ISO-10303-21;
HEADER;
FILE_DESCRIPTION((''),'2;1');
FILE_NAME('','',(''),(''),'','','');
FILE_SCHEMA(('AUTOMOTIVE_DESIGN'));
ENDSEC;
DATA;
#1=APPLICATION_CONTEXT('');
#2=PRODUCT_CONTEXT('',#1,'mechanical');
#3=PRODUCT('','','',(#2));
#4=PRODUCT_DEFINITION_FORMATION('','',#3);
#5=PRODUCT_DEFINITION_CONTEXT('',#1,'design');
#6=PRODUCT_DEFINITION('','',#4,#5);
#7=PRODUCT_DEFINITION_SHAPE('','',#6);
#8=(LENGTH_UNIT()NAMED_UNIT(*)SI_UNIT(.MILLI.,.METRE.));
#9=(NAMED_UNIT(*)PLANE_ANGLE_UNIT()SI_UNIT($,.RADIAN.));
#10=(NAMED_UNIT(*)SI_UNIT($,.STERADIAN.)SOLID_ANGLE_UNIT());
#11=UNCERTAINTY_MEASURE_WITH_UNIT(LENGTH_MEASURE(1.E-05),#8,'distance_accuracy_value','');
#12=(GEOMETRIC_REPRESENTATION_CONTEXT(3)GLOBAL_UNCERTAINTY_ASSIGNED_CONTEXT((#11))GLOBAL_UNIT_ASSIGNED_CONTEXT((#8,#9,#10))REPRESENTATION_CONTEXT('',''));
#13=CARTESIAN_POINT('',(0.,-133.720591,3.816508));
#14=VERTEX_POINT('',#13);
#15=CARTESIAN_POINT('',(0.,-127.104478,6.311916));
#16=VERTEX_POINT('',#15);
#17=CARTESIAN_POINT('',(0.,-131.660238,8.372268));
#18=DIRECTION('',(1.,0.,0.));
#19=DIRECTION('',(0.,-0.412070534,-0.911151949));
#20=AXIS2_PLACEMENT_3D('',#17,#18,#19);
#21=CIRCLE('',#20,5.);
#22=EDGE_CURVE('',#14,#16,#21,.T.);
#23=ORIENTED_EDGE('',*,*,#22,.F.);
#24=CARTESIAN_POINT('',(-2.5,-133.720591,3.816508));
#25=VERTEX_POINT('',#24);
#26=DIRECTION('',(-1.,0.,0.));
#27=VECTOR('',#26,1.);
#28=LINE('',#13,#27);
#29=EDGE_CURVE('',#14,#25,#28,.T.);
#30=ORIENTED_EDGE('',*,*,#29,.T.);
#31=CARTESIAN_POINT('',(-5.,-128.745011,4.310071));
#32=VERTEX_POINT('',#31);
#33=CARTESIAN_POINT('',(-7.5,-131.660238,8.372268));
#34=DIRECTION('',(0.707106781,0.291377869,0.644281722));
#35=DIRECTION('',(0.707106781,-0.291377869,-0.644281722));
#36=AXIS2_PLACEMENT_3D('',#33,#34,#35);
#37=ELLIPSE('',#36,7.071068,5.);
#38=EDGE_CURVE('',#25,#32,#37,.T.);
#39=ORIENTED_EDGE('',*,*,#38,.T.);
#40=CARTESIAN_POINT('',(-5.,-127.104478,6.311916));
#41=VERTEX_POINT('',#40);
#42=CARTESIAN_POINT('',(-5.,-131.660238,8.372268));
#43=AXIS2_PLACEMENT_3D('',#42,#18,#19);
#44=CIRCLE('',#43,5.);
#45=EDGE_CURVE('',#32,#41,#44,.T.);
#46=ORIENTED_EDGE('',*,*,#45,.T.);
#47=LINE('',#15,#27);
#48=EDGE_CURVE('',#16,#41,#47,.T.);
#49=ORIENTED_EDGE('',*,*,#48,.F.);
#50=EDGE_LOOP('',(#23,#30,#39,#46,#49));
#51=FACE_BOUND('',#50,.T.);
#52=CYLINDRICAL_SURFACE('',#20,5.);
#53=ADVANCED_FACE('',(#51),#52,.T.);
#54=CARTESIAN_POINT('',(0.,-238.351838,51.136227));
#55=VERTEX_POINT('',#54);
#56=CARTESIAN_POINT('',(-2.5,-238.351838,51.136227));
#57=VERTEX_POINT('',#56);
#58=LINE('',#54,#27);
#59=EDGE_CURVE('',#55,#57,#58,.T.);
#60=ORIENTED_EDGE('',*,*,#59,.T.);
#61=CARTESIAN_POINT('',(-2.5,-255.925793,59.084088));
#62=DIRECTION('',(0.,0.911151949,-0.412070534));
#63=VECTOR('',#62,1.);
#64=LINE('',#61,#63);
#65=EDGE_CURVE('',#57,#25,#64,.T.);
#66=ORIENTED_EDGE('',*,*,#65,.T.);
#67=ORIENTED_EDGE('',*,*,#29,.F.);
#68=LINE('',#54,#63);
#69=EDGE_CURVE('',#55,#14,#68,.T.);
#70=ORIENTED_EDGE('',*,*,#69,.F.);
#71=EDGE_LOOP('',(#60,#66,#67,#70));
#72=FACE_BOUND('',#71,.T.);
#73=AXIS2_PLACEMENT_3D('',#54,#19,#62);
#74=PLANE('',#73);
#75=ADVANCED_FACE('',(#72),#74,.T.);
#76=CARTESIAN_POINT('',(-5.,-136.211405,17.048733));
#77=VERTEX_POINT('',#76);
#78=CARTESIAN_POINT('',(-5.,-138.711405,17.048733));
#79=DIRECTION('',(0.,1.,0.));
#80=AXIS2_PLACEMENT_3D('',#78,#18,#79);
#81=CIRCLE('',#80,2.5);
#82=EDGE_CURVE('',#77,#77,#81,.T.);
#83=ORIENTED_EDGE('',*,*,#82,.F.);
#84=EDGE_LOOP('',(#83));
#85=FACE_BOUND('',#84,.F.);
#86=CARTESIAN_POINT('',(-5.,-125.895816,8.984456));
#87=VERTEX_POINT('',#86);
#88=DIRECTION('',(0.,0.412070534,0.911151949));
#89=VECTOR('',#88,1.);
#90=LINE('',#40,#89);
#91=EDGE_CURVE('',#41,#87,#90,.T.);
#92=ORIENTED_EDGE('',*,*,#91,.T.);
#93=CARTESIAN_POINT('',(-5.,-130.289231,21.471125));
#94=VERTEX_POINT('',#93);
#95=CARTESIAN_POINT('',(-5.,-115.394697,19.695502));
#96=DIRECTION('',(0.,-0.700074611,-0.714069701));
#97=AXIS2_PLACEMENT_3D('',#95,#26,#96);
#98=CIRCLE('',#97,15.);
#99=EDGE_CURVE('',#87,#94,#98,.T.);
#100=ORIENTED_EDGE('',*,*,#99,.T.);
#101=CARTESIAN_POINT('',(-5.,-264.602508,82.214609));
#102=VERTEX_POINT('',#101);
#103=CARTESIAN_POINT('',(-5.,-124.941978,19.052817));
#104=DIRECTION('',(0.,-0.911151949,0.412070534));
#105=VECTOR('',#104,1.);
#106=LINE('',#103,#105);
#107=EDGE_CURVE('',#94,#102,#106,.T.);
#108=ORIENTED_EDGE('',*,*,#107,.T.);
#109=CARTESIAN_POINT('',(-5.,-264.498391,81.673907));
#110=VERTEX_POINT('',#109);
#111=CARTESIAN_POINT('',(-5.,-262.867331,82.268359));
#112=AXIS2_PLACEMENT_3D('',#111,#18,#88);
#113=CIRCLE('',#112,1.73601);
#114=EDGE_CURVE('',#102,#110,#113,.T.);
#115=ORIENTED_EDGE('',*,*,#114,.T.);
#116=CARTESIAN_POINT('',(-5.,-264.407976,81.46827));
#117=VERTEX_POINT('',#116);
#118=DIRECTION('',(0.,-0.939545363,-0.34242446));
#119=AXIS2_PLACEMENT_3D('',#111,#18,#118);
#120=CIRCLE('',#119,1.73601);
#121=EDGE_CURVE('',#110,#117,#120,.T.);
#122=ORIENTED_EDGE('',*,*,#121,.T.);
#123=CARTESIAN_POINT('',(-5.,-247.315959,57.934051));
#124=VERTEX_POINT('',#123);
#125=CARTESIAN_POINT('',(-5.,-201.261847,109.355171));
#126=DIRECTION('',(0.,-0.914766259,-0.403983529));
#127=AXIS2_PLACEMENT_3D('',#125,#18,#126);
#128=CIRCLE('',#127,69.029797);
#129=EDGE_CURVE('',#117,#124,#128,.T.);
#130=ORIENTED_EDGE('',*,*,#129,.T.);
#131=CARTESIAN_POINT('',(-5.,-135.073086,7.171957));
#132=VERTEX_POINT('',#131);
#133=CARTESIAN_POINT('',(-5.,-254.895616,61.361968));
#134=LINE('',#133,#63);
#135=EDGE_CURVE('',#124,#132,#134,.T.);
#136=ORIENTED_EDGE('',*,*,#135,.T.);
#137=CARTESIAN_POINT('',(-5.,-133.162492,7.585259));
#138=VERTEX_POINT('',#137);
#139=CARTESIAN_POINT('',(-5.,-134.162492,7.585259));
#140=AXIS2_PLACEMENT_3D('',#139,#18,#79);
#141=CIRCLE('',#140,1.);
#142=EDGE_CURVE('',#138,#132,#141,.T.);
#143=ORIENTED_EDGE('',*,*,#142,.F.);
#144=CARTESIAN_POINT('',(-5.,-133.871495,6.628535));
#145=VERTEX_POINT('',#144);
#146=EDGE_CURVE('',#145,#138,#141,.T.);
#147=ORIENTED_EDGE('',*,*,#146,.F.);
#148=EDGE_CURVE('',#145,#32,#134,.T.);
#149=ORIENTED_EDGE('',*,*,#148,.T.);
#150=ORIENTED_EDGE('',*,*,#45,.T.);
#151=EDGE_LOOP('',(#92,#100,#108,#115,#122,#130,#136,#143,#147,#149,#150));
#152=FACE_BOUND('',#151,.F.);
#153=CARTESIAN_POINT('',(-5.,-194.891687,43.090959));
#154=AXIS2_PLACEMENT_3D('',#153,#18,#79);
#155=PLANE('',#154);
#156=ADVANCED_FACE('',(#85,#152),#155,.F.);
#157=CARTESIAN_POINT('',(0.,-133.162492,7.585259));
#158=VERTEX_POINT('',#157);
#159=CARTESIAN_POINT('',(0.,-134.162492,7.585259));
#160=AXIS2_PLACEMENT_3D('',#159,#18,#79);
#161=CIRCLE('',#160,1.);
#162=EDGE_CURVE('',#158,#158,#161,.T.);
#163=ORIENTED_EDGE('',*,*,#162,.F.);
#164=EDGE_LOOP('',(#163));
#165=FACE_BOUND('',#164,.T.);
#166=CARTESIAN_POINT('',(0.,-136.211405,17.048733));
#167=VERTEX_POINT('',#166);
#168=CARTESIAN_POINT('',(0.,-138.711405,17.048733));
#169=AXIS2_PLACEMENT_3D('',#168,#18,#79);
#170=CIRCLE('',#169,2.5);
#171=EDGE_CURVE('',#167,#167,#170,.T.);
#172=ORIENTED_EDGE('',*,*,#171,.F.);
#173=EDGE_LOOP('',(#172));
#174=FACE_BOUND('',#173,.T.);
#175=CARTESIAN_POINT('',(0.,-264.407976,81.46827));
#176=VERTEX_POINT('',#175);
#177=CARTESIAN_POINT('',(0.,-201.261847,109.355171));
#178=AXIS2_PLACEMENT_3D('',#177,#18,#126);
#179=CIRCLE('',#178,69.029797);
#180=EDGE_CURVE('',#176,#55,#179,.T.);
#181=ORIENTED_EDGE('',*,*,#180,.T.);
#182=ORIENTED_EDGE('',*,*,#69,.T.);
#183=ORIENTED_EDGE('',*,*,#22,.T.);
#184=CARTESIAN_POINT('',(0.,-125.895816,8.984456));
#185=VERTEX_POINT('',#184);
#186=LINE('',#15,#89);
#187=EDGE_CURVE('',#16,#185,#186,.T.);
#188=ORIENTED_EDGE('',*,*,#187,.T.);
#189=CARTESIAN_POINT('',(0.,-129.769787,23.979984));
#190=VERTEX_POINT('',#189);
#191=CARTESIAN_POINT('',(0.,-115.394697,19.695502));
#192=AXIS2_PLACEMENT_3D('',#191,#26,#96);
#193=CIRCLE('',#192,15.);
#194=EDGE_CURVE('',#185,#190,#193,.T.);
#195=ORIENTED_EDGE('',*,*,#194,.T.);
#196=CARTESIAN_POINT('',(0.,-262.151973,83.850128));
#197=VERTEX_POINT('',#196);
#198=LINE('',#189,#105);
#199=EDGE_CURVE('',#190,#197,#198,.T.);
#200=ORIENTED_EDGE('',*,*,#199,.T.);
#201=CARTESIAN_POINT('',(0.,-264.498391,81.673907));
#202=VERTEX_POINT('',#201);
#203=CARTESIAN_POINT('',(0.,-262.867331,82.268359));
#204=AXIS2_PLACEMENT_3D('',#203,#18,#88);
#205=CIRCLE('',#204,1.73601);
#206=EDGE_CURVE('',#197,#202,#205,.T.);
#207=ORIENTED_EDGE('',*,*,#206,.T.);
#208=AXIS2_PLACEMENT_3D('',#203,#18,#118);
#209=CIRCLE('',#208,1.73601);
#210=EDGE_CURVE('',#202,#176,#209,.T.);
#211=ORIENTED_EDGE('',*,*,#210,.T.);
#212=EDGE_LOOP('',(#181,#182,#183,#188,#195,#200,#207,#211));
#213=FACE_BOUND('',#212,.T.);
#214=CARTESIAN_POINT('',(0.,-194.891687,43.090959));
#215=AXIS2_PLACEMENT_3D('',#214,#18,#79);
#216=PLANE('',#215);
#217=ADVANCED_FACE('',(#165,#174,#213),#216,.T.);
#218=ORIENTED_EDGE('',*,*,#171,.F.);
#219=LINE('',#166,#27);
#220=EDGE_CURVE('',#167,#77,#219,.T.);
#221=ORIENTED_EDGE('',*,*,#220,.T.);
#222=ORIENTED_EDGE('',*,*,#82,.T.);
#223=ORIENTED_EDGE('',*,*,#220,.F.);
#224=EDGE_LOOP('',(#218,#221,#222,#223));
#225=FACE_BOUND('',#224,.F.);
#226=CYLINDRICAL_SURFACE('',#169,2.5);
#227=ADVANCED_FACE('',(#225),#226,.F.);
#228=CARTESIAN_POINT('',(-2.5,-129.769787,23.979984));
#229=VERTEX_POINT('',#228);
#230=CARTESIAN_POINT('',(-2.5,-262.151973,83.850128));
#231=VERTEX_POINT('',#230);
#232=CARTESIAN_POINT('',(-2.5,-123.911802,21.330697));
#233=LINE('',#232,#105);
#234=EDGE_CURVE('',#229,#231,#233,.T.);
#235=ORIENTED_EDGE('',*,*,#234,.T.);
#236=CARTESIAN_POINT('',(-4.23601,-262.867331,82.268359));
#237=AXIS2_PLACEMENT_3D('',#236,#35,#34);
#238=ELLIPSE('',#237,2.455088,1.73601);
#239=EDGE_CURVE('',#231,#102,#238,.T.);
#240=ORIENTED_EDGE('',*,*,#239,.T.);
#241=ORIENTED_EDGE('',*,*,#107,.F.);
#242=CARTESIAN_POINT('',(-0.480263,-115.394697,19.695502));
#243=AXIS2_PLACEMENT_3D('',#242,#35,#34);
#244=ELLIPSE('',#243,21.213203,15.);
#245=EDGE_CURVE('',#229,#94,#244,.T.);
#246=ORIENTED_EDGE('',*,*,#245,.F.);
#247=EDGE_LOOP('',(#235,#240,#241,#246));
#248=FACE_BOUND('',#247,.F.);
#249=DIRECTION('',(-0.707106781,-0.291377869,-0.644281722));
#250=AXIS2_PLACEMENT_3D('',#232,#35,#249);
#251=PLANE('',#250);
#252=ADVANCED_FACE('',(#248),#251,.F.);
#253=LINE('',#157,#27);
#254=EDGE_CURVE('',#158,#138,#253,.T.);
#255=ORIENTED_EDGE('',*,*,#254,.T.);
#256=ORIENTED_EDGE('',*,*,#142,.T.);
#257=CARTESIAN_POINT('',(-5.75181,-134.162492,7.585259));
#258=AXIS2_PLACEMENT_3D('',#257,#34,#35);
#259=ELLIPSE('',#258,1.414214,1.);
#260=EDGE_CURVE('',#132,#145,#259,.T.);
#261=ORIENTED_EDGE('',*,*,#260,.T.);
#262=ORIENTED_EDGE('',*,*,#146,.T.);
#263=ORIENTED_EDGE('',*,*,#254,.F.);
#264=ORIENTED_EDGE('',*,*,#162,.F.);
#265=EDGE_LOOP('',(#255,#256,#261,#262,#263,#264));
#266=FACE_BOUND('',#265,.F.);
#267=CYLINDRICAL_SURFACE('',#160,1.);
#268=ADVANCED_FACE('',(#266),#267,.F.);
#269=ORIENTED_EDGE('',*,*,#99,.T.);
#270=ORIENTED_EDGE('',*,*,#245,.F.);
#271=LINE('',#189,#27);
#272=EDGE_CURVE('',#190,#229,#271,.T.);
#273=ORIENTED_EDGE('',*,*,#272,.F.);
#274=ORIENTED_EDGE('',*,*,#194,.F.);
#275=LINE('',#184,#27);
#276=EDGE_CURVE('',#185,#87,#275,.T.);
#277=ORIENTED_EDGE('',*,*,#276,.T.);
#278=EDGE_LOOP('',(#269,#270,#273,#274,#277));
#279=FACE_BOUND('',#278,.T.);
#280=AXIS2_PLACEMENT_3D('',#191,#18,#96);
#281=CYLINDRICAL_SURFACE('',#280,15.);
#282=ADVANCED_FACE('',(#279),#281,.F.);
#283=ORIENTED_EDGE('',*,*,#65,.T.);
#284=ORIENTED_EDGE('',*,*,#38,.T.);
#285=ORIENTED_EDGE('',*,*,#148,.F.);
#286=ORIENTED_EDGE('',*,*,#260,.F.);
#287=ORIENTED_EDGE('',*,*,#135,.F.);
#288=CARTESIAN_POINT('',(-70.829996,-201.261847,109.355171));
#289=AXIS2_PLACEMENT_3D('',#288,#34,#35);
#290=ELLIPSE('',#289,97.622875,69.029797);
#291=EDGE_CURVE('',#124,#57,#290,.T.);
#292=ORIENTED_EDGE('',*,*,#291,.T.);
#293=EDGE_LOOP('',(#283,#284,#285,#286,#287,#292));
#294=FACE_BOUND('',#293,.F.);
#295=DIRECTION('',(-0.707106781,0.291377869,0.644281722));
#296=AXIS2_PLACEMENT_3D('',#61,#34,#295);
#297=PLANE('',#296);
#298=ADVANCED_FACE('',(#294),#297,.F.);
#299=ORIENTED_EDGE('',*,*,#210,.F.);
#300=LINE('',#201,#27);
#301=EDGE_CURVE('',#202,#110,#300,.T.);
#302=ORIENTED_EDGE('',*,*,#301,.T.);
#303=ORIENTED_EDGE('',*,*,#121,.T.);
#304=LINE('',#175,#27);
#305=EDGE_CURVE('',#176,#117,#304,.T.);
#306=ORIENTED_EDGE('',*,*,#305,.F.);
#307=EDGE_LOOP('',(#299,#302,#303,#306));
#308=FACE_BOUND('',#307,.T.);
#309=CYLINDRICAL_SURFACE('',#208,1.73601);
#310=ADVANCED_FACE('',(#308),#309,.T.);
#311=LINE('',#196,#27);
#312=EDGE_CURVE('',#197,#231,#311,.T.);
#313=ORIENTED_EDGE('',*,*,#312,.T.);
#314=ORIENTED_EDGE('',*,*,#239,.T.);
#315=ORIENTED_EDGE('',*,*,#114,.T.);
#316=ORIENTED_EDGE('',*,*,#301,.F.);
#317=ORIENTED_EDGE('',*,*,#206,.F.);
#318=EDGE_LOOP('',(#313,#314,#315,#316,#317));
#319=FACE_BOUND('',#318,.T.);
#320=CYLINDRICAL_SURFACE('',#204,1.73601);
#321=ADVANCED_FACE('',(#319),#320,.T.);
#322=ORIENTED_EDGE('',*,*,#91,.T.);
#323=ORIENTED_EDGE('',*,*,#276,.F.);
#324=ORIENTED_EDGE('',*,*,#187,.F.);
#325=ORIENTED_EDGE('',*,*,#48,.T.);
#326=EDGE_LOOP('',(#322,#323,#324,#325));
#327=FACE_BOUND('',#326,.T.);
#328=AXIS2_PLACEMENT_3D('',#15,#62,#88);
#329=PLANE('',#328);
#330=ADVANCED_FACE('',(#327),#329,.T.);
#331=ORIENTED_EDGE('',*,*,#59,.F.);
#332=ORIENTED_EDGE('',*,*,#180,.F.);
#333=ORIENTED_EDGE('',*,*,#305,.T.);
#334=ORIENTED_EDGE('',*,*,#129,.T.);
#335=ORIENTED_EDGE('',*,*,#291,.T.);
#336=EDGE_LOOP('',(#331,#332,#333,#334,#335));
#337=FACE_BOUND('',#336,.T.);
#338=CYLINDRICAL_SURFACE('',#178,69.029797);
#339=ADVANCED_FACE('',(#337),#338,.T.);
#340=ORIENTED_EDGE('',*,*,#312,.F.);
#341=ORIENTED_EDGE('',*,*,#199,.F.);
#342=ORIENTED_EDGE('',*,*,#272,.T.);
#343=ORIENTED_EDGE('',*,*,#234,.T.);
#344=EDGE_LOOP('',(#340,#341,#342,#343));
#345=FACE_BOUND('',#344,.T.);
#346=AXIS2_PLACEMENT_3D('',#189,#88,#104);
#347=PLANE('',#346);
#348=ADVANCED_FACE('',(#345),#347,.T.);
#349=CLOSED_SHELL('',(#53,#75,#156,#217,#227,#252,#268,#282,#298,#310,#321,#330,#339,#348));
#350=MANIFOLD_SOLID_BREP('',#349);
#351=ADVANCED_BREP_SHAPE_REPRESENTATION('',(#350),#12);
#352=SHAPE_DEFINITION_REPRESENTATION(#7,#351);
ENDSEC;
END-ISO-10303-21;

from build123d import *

# Parameters (mm, degrees)
F0_R        = 1
F0_R_2      = 2.5
F1_DEPTH    = 5
F2_T1_DEPTH = 140.5508565822
F2_T3_DEPTH = 158.1494237613


# Not quite as in the source:
# - a fillet or chamfer that OpenCascade refuses, or shapes differently, is made with other operations: its cross-section is extruded or revolved along the edge and cut away or added


with BuildPart() as f1:
    # F0 (on Right) → F1 (new body)
    with BuildSketch(Plane.YZ):
        with BuildLine():
            Line((-238.351838073, 51.1362271676), (-133.7205907933, 3.81650843))
            ThreePointArc((-133.7205907933, 3.81650843), (-129.8957188572, 3.6939702207), (-127.1044783752, 6.3119155052))
            Line((-127.1044783752, 6.3119155052), (-125.8958157643, 8.9844562534))
            ThreePointArc((-125.8958157643, 8.9844562534), (-129.9178817918, 15.9435567205), (-129.7697865993, 23.9799839275))
            Line((-129.7697865993, 23.9799839275), (-224.5101433949, 66.8265250251))
            Line((-224.5101433949, 66.8265250251), (-262.1519725075, 83.8501275596))
            ThreePointArc((-262.1519725075, 83.8501275596), (-264.0478442183, 83.5411975558), (-264.4983908426, 81.6739067294))
            ThreePointArc((-264.4983908426, 81.6739067294), (-264.4532671282, 81.571051598), (-264.4079761186, 81.4682700232))
            ThreePointArc((-264.4079761186, 81.4682700232), (-253.6243159552, 64.3742338109), (-238.351838073, 51.1362271676))
        make_face()
        with Locations((-134.1624917959, 7.5852589493)):
            Circle(F0_R, mode=Mode.SUBTRACT)
        with Locations((-138.7114049438, 17.0487332662)):
            Circle(F0_R_2, mode=Mode.SUBTRACT)
        with BuildLine():
            ThreePointArc((-264.4983908426, 81.6739067294), (-264.4565130864, 81.5696244091), (-264.4079761186, 81.4682700232))
            ThreePointArc((-264.4079761186, 81.4682700232), (-264.4532671282, 81.571051598), (-264.4983908426, 81.6739067294))
        make_face()
    extrude(amount=-F1_DEPTH)

    # F2: chamfer of 2.5 on 2 edges, made by hand

    # F2_s2 → F2_t1 (cut)
    with BuildSketch(Plane(origin=(0, -234.652694271, 106.1222128437), x_dir=(1, 0, 0), z_dir=(0, 0.9111519493, -0.4120705343))):
        Polygon((-2.5, 51.6248961977), (-5, 49.1248961977), (-5, 51.6248961977), align=None)
    extrude(amount=F2_T1_DEPTH, mode=Mode.SUBTRACT)

    # F2_s4 → F2_t3 (cut)
    with BuildSketch(Plane(origin=(0, -110.8801138075, 50.1457827883), x_dir=(1, 0, 0), z_dir=(0, -0.9111519493, 0.4120705343))):
        Polygon((-2.5, -31.6248961977), (-5, -34.1248961977), (-5, -31.6248961977), align=None)
    extrude(amount=F2_T3_DEPTH, mode=Mode.SUBTRACT)


solid = f1.part
